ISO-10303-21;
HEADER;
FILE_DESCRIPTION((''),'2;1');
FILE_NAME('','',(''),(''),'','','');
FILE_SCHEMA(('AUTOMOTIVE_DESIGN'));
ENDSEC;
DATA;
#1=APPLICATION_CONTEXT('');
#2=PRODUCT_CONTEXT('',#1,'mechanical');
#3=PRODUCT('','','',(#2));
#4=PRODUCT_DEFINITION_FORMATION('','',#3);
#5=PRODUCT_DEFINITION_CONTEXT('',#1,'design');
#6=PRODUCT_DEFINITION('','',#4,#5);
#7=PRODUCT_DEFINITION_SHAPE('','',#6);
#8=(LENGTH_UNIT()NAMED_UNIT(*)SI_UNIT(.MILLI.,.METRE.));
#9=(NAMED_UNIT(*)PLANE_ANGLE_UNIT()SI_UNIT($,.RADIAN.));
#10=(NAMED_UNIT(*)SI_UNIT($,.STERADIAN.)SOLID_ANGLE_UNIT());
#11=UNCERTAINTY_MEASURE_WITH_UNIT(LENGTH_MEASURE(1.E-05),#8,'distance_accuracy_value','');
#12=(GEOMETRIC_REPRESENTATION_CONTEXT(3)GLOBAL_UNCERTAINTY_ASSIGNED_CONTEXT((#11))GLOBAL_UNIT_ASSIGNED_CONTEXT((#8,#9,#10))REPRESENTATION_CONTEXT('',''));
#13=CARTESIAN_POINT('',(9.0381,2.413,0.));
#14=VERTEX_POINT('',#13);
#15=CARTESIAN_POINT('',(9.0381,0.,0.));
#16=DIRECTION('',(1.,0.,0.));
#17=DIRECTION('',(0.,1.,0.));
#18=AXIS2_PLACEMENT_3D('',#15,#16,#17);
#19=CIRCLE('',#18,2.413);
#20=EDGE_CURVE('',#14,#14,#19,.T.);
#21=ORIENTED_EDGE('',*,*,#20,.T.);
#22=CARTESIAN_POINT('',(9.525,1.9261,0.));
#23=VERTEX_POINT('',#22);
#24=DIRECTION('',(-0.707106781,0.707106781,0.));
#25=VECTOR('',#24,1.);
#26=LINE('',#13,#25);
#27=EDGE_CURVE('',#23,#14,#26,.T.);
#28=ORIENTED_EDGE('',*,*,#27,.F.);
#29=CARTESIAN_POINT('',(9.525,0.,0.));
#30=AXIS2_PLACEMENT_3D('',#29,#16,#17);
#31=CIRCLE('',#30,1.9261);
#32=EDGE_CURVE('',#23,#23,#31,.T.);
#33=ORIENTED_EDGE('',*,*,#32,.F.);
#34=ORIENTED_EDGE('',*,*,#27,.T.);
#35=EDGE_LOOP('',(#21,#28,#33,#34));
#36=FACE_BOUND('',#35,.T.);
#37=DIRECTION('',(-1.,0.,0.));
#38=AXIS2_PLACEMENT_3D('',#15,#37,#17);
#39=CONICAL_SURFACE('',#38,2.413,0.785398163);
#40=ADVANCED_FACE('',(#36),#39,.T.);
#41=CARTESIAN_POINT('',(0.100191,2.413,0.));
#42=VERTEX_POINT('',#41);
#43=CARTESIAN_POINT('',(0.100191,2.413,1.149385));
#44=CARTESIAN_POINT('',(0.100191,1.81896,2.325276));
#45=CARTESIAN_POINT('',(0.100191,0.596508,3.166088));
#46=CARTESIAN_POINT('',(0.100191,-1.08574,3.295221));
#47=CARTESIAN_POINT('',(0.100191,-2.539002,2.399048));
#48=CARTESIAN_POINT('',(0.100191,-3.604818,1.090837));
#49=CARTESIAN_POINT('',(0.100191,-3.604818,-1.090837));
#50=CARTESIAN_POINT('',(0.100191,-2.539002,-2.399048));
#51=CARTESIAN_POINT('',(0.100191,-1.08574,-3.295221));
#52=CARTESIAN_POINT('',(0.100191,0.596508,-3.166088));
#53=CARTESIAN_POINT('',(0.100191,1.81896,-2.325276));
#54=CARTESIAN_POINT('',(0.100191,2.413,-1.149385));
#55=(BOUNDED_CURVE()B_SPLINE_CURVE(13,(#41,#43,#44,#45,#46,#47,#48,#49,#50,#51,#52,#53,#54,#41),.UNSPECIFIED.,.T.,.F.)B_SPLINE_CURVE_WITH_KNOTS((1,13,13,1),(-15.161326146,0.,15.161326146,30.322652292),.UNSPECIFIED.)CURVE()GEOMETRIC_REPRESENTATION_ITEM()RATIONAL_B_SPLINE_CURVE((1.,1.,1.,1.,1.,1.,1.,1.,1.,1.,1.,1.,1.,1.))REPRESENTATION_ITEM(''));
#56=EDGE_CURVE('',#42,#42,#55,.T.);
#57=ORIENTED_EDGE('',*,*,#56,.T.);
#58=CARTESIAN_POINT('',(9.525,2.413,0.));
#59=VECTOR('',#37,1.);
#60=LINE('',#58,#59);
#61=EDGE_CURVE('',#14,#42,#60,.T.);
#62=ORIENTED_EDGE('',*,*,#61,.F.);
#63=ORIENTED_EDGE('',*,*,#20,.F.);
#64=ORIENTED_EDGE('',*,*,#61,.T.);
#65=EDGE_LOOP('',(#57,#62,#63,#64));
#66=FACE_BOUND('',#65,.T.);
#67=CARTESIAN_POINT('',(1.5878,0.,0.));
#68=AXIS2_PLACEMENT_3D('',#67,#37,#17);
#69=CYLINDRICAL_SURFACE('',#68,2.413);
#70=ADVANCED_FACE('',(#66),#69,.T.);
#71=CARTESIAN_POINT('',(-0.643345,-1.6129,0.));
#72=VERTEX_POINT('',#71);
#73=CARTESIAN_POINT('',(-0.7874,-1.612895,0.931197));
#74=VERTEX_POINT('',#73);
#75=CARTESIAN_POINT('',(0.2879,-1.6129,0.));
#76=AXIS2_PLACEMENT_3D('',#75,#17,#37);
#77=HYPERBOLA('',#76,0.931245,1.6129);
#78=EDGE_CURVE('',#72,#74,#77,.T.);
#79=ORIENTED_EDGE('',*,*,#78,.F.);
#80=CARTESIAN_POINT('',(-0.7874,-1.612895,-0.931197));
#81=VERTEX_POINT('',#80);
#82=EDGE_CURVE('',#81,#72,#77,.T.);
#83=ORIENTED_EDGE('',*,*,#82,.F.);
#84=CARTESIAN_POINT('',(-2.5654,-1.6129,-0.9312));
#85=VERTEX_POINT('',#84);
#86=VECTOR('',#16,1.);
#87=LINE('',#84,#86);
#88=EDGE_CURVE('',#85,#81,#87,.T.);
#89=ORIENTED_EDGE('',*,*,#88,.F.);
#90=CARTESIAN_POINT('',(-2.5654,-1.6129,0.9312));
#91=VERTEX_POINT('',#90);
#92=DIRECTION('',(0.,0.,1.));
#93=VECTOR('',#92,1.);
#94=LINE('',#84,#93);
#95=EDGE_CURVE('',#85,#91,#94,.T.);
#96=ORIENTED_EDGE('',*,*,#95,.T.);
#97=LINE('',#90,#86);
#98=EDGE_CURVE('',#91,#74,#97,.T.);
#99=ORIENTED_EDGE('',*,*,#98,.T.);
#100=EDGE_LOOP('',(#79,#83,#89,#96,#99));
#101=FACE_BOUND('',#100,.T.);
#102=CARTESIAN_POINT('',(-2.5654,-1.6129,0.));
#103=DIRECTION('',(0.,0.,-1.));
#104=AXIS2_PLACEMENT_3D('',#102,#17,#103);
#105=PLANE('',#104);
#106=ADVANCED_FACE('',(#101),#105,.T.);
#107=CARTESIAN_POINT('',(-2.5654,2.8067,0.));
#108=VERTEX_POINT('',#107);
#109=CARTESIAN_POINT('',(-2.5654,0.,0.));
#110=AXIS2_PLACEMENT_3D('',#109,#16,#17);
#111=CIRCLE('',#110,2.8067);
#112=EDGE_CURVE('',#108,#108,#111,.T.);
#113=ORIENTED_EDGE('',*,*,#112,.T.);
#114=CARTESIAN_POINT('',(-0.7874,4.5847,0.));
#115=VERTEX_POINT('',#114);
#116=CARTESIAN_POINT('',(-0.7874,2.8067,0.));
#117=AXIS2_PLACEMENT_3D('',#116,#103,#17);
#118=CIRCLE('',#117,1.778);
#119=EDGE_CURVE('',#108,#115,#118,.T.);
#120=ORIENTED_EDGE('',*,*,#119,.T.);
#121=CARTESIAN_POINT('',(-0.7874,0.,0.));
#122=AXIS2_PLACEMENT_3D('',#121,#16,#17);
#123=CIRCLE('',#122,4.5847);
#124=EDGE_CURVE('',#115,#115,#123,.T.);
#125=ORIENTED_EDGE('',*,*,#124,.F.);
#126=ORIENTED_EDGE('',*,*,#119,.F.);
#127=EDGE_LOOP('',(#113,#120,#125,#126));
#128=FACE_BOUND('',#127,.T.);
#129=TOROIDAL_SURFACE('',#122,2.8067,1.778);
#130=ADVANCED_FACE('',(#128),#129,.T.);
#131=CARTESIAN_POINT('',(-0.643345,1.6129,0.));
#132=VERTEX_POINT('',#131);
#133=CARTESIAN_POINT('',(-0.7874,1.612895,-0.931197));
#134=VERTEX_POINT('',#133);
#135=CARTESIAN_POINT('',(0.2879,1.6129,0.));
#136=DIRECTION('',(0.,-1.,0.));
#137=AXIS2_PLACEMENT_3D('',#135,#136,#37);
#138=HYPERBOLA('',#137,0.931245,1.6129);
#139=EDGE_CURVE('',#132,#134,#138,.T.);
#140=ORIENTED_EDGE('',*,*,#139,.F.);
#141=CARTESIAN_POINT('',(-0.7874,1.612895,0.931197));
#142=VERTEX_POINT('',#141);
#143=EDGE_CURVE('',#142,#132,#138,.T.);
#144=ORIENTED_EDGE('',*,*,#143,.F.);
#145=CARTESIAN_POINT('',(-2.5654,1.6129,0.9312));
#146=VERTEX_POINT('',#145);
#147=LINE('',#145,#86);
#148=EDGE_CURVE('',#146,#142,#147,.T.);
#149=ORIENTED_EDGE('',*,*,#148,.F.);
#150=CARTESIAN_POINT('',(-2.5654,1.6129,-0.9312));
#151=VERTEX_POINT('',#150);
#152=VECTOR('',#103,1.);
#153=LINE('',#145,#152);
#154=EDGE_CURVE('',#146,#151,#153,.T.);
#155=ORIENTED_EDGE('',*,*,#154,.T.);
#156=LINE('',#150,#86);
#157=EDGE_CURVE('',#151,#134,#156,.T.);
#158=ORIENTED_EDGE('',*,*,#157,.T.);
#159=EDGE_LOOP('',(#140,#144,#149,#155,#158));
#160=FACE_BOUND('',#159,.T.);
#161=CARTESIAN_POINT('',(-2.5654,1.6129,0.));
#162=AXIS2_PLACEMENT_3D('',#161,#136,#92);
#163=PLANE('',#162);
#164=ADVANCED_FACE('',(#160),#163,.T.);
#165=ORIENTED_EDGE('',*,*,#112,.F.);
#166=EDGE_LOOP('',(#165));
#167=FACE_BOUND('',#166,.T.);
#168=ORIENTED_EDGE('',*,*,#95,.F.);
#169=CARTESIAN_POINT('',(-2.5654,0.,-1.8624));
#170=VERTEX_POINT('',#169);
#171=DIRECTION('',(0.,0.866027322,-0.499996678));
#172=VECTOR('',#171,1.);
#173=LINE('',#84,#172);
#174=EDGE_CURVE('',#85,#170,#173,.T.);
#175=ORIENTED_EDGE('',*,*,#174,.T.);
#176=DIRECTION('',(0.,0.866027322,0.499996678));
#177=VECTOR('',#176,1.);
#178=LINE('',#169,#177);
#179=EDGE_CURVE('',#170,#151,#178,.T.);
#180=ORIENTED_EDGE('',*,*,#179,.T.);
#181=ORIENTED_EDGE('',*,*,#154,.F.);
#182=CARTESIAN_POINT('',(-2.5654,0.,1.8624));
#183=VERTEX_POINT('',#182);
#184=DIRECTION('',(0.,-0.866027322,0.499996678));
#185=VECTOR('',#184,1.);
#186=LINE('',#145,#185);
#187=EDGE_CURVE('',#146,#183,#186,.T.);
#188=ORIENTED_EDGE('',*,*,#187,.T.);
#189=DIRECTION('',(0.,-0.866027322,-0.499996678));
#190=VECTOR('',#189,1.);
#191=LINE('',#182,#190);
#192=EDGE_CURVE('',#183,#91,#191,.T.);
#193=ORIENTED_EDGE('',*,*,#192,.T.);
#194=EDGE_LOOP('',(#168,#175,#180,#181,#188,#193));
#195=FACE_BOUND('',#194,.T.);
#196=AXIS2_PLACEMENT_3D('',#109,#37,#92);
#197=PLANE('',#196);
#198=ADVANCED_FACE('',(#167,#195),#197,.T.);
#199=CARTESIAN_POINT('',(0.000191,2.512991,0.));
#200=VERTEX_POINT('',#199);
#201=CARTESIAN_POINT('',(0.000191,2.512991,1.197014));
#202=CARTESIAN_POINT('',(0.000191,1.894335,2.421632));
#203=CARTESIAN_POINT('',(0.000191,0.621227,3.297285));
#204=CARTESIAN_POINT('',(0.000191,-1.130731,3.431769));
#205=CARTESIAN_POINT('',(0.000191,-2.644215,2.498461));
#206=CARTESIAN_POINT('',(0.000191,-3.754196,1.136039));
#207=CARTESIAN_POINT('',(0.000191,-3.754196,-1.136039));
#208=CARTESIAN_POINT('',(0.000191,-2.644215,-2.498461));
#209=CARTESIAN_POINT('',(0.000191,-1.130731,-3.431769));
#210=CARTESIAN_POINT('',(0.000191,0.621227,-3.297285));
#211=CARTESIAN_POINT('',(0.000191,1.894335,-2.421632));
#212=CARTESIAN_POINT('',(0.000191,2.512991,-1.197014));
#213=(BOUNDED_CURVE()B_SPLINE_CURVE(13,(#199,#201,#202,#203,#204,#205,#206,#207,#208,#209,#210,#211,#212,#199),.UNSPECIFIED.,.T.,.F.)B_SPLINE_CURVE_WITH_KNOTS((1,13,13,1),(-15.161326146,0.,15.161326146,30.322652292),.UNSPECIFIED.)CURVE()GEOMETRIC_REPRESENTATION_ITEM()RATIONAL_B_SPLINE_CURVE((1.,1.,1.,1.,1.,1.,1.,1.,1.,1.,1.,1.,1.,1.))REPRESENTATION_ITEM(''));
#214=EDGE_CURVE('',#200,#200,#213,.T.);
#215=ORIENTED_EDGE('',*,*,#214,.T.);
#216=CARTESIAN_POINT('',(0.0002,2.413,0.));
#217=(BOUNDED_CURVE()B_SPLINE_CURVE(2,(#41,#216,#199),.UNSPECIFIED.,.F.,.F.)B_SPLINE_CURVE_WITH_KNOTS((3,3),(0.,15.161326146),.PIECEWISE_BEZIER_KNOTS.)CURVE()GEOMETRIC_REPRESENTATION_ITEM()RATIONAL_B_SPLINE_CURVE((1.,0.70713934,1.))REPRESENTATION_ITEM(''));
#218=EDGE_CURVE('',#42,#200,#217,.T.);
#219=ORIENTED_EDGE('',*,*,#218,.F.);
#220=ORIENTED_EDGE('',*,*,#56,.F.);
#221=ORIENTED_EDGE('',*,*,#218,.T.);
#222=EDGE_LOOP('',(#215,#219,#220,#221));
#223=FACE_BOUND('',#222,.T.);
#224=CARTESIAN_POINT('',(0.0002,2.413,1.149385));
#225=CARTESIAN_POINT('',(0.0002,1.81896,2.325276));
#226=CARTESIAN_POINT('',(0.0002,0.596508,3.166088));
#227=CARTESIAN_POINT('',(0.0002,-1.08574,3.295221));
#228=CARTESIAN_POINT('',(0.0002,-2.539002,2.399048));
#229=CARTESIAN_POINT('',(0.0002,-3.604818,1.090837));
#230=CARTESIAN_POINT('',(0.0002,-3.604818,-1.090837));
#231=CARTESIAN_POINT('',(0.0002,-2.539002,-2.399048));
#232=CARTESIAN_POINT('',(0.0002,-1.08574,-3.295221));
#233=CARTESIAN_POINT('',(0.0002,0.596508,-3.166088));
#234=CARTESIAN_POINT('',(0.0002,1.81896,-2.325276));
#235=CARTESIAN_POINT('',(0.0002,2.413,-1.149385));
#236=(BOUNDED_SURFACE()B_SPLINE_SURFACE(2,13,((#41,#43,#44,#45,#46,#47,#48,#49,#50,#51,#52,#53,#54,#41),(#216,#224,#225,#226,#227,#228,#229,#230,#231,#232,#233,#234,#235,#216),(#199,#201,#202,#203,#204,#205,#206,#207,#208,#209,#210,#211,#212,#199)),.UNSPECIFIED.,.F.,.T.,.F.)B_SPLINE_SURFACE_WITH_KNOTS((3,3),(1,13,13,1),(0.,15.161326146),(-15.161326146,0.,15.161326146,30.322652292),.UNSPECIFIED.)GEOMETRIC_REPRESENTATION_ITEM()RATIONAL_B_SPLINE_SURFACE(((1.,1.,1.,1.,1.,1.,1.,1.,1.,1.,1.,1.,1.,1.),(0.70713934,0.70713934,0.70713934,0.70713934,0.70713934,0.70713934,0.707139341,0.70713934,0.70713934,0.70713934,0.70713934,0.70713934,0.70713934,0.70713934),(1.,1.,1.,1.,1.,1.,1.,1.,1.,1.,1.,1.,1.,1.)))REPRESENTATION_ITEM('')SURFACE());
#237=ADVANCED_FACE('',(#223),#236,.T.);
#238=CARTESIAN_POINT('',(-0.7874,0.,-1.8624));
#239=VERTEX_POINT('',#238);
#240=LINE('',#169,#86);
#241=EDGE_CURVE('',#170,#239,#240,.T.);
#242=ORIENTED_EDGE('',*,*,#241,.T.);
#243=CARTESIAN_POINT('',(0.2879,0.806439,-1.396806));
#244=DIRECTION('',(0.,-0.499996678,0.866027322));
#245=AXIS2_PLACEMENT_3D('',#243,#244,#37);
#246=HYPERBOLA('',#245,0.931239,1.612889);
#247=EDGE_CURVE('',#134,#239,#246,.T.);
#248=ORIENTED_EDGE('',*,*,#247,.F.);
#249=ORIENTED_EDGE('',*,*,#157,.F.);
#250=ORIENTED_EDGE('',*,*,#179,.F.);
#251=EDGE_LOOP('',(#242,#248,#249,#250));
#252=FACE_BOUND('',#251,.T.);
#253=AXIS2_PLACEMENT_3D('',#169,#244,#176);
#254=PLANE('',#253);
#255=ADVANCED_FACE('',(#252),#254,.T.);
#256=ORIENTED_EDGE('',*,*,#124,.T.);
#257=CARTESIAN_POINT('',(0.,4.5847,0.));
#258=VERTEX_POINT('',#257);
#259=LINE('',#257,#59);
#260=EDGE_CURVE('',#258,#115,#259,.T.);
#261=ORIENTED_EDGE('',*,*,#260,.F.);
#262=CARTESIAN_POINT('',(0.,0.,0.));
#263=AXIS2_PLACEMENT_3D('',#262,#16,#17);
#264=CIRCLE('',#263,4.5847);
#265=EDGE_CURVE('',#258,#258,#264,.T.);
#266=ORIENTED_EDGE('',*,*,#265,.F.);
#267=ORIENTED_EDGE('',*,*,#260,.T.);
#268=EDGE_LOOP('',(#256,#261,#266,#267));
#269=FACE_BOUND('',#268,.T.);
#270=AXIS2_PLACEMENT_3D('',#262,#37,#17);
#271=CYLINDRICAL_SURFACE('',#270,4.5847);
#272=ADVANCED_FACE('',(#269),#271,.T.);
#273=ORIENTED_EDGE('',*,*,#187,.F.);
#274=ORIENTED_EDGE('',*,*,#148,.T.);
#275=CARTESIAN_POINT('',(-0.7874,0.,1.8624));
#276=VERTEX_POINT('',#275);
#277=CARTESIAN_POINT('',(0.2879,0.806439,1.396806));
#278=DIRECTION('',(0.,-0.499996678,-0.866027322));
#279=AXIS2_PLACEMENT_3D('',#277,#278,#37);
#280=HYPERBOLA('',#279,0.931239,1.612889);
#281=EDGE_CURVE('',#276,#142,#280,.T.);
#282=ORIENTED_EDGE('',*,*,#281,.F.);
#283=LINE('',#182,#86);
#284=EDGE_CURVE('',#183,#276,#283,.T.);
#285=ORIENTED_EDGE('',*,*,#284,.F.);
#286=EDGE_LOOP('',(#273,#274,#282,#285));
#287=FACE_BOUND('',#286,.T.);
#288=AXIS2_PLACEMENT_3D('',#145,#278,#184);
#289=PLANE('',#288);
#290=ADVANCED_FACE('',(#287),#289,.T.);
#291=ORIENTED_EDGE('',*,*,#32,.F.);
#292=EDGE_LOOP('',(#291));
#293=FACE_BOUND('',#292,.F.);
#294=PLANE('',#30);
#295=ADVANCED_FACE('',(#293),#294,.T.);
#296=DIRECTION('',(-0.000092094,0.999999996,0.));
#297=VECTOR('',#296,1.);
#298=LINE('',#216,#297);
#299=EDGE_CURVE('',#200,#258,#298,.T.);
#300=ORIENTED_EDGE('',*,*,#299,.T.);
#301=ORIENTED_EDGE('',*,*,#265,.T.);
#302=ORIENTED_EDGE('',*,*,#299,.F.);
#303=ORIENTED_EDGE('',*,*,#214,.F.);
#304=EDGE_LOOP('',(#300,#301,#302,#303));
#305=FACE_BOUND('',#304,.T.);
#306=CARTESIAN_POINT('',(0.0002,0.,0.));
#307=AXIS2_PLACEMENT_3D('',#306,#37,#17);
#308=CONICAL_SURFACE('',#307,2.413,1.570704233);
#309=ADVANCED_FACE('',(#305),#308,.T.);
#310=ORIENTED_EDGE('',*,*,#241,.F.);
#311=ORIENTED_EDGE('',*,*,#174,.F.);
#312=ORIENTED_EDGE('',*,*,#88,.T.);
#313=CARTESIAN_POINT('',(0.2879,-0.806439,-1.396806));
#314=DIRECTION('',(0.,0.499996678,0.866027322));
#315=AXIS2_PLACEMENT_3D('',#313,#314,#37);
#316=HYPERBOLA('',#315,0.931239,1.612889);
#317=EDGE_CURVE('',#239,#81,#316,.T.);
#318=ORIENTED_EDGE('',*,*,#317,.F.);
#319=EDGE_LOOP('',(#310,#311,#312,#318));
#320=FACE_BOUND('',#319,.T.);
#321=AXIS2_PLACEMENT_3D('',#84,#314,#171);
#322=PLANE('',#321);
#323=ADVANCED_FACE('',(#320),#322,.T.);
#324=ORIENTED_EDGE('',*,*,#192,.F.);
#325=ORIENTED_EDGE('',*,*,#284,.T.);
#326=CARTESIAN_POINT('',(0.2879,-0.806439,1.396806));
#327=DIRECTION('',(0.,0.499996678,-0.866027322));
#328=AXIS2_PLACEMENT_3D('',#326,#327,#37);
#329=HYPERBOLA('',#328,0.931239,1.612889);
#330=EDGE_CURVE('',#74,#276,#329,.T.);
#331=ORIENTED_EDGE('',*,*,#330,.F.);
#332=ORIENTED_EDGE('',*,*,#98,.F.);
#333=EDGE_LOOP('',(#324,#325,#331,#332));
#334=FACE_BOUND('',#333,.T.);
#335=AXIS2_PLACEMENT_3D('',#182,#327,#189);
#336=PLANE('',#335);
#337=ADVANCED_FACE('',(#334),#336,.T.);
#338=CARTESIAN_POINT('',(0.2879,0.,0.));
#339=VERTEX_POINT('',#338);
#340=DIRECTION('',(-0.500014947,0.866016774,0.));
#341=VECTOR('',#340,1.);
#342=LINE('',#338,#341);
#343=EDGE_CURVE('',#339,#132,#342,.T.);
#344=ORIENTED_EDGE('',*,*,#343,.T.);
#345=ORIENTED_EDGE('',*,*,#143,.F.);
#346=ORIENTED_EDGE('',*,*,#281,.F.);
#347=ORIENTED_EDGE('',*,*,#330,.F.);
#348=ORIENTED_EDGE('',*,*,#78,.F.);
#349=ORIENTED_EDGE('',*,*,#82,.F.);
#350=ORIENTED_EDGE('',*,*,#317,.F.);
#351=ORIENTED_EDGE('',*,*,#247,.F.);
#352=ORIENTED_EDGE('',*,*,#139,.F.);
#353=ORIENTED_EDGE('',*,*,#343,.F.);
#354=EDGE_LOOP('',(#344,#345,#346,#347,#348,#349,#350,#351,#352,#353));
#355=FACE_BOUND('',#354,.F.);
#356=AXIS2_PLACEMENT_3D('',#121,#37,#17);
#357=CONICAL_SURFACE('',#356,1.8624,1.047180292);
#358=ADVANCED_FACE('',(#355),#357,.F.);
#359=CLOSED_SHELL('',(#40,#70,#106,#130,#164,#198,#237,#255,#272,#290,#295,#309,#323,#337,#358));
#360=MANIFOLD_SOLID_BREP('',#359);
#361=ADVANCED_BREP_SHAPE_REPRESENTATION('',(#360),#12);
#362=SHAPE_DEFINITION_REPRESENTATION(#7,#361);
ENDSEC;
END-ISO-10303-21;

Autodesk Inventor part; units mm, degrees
ref_plane "YZ Plane" through (0, 0, 0) normal (1, 0, 0) x (0, 1, 0)
ref_plane "XZ Plane" through (0, 0, 0) normal (0, 1, 0) x (-1, 0, 0)
sketch "Sketch1" plane through (0, 0, 0) normal (0, 0, 1) x (1, 0, 0)
  line L0 (0.2879, 0) -> (9.525, 0)
  line L1 (9.525, 0) -> (9.525, 2.413)
  line L2 (9.525, 2.413) -> (1.5878, 2.413)
  line L3 (1.5878, 2.413) -> (0.0002, 2.413)
  line L4 (0.0002, 2.413) -> (0, 2.413)
  line L5 (0, 2.413) -> (0, 4.5847)
  line L6 (0, 4.5847) -> (-2.5654, 4.5847)
  line L7 (-2.5654, 4.5847) -> (-2.5654, 1.8624)
  line L8 (-2.5654, 1.8624) -> (-0.7874, 1.8624)
  line L9 (-0.7874, 1.8624) -> (0.2879, 0)
  line L10 (-4.9835, 0) -> (11.9431, 0) projected
  line L11 (0, -0.9169) -> (0, 5.5016) projected
  line L12 (1.5878, 2.413) -> (0, 2.413) construction
  dimension "d1" = 7.9372
  dimension "d2" = 1.5876
  dimension "d3" = 2.5654
  dimension "d4" = 1.778
  dimension "d5" = 60
  dimension "d6" = 4.826
  dimension "d7" = 4.826
  dimension "d8" = 3.7248
  dimension "d9" = 9.1694
  dimension "d26" = 9.525
revolve "Body" add sketch "Sketch1" angle 360 about axis through (0.2879, 0, 0) along (1, 0, 0) contours L9 L11 L3 L2 L1 L0 | L9 L8 L7 L6 L5 L11
sketch "Sketch2" plane through (-2.5654, 0, 0) normal (-1, 0, 0) x (0, 0, 1)
  circle A0 centre (0, 0) radius 1.8624 projected
  line L0 (0, -6.4186) -> (0, 6.4186) projected
  line L1 (-6.4186, 0) -> (6.4186, 0) projected
  line L2 (1.8624, 0) -> (0.9312, -1.6129)
  line L3 (0.9312, -1.6129) -> (-0.9312, -1.6129)
  line L4 (-0.9312, -1.6129) -> (-1.8624, 0)
  line L5 (-1.8624, 0) -> (-0.9312, 1.6129)
  line L6 (-0.9312, 1.6129) -> (0.9312, 1.6129)
  line L7 (0.9312, 1.6129) -> (1.8624, 0)
extrude "Slot" add sketch "Sketch2" against normal up to next contours L7 A0 | A0 L2 | L6 L0 A0 | A0 L0 L3 | L0 L6 A0 | A0 L3 L0 | L4 A0 | A0 L5
fillet "Fillet1" radius 1.778 1 edges at (-2.5654, -4.5847, 0)
thread "Thread" size "10-32 UNF" class "2A" standard "ANSI Unified Screw Threads" length 7.9372
chamfer "Chamfer1" distance 0.4869 distance2 0.4869 1 edges at (9.525, -2.413, 0) measured on face at (9.525, -0.2686, 0.7084)
ref_plane "Work Plane1" through (29, 0, 0) normal (0, -1, 0) x (1, 0, 0)
fillet "Fillet2" radius 0.1 1 edges at (0.0002, -2.413, 0)
equation "\"d30\" = R"
equation "\"d17\" = RR"
equation "\"d13\" = GEL"
equation "\"d15\" = -0.5 * SPD + 0.5 * GD"
equation "\"d16\" = GUL"
equation "\"d1\" = GEL"
equation "\"d3\" = KOH"
equation "\"d4\" = INTI"
equation "\"d6\" = GD"
equation "\"d7\" = BDM"
equation "\"d8\" = 1.1547 * SW"
equation "\"d9\" = KOD"
equation "\"d26\" = NLG"
equation "\"GD\" = NND"
equation "\"NLG\" = 9.525"
equation "\"GEL\" = 7.93725"
equation "\"KOD\" = 9.1694"
equation "\"KOH\" = 2.5654"
equation "\"INTI\" = 1.778"
equation "\"GAL\" = 1.5875"
equation "\"GUL\" = 0.48692"
equation "\"BDM\" = NND"
equation "\"SW\" = 3.2258"
equation "\"RR\" = 1.778"
equation "\"SPD\" = GD1"
equation "\"R\" = 0.1"
equation "\"KR\" = 4.699"
equation "\"GD1\" = 3.85216"
equation "\"THREADDIA\" = 4.826"
equation "\"FAWI\" = 45deg"
equation "\"KOH1\" = 1.778"
equation "\"NND\" = 4.826"
equation "\"TOA\" = 30deg"
equation "\"E0\" = 1.155 * SW"
properties part number "Unbrako - 10 x 3/8" material "Steel, Mild"
